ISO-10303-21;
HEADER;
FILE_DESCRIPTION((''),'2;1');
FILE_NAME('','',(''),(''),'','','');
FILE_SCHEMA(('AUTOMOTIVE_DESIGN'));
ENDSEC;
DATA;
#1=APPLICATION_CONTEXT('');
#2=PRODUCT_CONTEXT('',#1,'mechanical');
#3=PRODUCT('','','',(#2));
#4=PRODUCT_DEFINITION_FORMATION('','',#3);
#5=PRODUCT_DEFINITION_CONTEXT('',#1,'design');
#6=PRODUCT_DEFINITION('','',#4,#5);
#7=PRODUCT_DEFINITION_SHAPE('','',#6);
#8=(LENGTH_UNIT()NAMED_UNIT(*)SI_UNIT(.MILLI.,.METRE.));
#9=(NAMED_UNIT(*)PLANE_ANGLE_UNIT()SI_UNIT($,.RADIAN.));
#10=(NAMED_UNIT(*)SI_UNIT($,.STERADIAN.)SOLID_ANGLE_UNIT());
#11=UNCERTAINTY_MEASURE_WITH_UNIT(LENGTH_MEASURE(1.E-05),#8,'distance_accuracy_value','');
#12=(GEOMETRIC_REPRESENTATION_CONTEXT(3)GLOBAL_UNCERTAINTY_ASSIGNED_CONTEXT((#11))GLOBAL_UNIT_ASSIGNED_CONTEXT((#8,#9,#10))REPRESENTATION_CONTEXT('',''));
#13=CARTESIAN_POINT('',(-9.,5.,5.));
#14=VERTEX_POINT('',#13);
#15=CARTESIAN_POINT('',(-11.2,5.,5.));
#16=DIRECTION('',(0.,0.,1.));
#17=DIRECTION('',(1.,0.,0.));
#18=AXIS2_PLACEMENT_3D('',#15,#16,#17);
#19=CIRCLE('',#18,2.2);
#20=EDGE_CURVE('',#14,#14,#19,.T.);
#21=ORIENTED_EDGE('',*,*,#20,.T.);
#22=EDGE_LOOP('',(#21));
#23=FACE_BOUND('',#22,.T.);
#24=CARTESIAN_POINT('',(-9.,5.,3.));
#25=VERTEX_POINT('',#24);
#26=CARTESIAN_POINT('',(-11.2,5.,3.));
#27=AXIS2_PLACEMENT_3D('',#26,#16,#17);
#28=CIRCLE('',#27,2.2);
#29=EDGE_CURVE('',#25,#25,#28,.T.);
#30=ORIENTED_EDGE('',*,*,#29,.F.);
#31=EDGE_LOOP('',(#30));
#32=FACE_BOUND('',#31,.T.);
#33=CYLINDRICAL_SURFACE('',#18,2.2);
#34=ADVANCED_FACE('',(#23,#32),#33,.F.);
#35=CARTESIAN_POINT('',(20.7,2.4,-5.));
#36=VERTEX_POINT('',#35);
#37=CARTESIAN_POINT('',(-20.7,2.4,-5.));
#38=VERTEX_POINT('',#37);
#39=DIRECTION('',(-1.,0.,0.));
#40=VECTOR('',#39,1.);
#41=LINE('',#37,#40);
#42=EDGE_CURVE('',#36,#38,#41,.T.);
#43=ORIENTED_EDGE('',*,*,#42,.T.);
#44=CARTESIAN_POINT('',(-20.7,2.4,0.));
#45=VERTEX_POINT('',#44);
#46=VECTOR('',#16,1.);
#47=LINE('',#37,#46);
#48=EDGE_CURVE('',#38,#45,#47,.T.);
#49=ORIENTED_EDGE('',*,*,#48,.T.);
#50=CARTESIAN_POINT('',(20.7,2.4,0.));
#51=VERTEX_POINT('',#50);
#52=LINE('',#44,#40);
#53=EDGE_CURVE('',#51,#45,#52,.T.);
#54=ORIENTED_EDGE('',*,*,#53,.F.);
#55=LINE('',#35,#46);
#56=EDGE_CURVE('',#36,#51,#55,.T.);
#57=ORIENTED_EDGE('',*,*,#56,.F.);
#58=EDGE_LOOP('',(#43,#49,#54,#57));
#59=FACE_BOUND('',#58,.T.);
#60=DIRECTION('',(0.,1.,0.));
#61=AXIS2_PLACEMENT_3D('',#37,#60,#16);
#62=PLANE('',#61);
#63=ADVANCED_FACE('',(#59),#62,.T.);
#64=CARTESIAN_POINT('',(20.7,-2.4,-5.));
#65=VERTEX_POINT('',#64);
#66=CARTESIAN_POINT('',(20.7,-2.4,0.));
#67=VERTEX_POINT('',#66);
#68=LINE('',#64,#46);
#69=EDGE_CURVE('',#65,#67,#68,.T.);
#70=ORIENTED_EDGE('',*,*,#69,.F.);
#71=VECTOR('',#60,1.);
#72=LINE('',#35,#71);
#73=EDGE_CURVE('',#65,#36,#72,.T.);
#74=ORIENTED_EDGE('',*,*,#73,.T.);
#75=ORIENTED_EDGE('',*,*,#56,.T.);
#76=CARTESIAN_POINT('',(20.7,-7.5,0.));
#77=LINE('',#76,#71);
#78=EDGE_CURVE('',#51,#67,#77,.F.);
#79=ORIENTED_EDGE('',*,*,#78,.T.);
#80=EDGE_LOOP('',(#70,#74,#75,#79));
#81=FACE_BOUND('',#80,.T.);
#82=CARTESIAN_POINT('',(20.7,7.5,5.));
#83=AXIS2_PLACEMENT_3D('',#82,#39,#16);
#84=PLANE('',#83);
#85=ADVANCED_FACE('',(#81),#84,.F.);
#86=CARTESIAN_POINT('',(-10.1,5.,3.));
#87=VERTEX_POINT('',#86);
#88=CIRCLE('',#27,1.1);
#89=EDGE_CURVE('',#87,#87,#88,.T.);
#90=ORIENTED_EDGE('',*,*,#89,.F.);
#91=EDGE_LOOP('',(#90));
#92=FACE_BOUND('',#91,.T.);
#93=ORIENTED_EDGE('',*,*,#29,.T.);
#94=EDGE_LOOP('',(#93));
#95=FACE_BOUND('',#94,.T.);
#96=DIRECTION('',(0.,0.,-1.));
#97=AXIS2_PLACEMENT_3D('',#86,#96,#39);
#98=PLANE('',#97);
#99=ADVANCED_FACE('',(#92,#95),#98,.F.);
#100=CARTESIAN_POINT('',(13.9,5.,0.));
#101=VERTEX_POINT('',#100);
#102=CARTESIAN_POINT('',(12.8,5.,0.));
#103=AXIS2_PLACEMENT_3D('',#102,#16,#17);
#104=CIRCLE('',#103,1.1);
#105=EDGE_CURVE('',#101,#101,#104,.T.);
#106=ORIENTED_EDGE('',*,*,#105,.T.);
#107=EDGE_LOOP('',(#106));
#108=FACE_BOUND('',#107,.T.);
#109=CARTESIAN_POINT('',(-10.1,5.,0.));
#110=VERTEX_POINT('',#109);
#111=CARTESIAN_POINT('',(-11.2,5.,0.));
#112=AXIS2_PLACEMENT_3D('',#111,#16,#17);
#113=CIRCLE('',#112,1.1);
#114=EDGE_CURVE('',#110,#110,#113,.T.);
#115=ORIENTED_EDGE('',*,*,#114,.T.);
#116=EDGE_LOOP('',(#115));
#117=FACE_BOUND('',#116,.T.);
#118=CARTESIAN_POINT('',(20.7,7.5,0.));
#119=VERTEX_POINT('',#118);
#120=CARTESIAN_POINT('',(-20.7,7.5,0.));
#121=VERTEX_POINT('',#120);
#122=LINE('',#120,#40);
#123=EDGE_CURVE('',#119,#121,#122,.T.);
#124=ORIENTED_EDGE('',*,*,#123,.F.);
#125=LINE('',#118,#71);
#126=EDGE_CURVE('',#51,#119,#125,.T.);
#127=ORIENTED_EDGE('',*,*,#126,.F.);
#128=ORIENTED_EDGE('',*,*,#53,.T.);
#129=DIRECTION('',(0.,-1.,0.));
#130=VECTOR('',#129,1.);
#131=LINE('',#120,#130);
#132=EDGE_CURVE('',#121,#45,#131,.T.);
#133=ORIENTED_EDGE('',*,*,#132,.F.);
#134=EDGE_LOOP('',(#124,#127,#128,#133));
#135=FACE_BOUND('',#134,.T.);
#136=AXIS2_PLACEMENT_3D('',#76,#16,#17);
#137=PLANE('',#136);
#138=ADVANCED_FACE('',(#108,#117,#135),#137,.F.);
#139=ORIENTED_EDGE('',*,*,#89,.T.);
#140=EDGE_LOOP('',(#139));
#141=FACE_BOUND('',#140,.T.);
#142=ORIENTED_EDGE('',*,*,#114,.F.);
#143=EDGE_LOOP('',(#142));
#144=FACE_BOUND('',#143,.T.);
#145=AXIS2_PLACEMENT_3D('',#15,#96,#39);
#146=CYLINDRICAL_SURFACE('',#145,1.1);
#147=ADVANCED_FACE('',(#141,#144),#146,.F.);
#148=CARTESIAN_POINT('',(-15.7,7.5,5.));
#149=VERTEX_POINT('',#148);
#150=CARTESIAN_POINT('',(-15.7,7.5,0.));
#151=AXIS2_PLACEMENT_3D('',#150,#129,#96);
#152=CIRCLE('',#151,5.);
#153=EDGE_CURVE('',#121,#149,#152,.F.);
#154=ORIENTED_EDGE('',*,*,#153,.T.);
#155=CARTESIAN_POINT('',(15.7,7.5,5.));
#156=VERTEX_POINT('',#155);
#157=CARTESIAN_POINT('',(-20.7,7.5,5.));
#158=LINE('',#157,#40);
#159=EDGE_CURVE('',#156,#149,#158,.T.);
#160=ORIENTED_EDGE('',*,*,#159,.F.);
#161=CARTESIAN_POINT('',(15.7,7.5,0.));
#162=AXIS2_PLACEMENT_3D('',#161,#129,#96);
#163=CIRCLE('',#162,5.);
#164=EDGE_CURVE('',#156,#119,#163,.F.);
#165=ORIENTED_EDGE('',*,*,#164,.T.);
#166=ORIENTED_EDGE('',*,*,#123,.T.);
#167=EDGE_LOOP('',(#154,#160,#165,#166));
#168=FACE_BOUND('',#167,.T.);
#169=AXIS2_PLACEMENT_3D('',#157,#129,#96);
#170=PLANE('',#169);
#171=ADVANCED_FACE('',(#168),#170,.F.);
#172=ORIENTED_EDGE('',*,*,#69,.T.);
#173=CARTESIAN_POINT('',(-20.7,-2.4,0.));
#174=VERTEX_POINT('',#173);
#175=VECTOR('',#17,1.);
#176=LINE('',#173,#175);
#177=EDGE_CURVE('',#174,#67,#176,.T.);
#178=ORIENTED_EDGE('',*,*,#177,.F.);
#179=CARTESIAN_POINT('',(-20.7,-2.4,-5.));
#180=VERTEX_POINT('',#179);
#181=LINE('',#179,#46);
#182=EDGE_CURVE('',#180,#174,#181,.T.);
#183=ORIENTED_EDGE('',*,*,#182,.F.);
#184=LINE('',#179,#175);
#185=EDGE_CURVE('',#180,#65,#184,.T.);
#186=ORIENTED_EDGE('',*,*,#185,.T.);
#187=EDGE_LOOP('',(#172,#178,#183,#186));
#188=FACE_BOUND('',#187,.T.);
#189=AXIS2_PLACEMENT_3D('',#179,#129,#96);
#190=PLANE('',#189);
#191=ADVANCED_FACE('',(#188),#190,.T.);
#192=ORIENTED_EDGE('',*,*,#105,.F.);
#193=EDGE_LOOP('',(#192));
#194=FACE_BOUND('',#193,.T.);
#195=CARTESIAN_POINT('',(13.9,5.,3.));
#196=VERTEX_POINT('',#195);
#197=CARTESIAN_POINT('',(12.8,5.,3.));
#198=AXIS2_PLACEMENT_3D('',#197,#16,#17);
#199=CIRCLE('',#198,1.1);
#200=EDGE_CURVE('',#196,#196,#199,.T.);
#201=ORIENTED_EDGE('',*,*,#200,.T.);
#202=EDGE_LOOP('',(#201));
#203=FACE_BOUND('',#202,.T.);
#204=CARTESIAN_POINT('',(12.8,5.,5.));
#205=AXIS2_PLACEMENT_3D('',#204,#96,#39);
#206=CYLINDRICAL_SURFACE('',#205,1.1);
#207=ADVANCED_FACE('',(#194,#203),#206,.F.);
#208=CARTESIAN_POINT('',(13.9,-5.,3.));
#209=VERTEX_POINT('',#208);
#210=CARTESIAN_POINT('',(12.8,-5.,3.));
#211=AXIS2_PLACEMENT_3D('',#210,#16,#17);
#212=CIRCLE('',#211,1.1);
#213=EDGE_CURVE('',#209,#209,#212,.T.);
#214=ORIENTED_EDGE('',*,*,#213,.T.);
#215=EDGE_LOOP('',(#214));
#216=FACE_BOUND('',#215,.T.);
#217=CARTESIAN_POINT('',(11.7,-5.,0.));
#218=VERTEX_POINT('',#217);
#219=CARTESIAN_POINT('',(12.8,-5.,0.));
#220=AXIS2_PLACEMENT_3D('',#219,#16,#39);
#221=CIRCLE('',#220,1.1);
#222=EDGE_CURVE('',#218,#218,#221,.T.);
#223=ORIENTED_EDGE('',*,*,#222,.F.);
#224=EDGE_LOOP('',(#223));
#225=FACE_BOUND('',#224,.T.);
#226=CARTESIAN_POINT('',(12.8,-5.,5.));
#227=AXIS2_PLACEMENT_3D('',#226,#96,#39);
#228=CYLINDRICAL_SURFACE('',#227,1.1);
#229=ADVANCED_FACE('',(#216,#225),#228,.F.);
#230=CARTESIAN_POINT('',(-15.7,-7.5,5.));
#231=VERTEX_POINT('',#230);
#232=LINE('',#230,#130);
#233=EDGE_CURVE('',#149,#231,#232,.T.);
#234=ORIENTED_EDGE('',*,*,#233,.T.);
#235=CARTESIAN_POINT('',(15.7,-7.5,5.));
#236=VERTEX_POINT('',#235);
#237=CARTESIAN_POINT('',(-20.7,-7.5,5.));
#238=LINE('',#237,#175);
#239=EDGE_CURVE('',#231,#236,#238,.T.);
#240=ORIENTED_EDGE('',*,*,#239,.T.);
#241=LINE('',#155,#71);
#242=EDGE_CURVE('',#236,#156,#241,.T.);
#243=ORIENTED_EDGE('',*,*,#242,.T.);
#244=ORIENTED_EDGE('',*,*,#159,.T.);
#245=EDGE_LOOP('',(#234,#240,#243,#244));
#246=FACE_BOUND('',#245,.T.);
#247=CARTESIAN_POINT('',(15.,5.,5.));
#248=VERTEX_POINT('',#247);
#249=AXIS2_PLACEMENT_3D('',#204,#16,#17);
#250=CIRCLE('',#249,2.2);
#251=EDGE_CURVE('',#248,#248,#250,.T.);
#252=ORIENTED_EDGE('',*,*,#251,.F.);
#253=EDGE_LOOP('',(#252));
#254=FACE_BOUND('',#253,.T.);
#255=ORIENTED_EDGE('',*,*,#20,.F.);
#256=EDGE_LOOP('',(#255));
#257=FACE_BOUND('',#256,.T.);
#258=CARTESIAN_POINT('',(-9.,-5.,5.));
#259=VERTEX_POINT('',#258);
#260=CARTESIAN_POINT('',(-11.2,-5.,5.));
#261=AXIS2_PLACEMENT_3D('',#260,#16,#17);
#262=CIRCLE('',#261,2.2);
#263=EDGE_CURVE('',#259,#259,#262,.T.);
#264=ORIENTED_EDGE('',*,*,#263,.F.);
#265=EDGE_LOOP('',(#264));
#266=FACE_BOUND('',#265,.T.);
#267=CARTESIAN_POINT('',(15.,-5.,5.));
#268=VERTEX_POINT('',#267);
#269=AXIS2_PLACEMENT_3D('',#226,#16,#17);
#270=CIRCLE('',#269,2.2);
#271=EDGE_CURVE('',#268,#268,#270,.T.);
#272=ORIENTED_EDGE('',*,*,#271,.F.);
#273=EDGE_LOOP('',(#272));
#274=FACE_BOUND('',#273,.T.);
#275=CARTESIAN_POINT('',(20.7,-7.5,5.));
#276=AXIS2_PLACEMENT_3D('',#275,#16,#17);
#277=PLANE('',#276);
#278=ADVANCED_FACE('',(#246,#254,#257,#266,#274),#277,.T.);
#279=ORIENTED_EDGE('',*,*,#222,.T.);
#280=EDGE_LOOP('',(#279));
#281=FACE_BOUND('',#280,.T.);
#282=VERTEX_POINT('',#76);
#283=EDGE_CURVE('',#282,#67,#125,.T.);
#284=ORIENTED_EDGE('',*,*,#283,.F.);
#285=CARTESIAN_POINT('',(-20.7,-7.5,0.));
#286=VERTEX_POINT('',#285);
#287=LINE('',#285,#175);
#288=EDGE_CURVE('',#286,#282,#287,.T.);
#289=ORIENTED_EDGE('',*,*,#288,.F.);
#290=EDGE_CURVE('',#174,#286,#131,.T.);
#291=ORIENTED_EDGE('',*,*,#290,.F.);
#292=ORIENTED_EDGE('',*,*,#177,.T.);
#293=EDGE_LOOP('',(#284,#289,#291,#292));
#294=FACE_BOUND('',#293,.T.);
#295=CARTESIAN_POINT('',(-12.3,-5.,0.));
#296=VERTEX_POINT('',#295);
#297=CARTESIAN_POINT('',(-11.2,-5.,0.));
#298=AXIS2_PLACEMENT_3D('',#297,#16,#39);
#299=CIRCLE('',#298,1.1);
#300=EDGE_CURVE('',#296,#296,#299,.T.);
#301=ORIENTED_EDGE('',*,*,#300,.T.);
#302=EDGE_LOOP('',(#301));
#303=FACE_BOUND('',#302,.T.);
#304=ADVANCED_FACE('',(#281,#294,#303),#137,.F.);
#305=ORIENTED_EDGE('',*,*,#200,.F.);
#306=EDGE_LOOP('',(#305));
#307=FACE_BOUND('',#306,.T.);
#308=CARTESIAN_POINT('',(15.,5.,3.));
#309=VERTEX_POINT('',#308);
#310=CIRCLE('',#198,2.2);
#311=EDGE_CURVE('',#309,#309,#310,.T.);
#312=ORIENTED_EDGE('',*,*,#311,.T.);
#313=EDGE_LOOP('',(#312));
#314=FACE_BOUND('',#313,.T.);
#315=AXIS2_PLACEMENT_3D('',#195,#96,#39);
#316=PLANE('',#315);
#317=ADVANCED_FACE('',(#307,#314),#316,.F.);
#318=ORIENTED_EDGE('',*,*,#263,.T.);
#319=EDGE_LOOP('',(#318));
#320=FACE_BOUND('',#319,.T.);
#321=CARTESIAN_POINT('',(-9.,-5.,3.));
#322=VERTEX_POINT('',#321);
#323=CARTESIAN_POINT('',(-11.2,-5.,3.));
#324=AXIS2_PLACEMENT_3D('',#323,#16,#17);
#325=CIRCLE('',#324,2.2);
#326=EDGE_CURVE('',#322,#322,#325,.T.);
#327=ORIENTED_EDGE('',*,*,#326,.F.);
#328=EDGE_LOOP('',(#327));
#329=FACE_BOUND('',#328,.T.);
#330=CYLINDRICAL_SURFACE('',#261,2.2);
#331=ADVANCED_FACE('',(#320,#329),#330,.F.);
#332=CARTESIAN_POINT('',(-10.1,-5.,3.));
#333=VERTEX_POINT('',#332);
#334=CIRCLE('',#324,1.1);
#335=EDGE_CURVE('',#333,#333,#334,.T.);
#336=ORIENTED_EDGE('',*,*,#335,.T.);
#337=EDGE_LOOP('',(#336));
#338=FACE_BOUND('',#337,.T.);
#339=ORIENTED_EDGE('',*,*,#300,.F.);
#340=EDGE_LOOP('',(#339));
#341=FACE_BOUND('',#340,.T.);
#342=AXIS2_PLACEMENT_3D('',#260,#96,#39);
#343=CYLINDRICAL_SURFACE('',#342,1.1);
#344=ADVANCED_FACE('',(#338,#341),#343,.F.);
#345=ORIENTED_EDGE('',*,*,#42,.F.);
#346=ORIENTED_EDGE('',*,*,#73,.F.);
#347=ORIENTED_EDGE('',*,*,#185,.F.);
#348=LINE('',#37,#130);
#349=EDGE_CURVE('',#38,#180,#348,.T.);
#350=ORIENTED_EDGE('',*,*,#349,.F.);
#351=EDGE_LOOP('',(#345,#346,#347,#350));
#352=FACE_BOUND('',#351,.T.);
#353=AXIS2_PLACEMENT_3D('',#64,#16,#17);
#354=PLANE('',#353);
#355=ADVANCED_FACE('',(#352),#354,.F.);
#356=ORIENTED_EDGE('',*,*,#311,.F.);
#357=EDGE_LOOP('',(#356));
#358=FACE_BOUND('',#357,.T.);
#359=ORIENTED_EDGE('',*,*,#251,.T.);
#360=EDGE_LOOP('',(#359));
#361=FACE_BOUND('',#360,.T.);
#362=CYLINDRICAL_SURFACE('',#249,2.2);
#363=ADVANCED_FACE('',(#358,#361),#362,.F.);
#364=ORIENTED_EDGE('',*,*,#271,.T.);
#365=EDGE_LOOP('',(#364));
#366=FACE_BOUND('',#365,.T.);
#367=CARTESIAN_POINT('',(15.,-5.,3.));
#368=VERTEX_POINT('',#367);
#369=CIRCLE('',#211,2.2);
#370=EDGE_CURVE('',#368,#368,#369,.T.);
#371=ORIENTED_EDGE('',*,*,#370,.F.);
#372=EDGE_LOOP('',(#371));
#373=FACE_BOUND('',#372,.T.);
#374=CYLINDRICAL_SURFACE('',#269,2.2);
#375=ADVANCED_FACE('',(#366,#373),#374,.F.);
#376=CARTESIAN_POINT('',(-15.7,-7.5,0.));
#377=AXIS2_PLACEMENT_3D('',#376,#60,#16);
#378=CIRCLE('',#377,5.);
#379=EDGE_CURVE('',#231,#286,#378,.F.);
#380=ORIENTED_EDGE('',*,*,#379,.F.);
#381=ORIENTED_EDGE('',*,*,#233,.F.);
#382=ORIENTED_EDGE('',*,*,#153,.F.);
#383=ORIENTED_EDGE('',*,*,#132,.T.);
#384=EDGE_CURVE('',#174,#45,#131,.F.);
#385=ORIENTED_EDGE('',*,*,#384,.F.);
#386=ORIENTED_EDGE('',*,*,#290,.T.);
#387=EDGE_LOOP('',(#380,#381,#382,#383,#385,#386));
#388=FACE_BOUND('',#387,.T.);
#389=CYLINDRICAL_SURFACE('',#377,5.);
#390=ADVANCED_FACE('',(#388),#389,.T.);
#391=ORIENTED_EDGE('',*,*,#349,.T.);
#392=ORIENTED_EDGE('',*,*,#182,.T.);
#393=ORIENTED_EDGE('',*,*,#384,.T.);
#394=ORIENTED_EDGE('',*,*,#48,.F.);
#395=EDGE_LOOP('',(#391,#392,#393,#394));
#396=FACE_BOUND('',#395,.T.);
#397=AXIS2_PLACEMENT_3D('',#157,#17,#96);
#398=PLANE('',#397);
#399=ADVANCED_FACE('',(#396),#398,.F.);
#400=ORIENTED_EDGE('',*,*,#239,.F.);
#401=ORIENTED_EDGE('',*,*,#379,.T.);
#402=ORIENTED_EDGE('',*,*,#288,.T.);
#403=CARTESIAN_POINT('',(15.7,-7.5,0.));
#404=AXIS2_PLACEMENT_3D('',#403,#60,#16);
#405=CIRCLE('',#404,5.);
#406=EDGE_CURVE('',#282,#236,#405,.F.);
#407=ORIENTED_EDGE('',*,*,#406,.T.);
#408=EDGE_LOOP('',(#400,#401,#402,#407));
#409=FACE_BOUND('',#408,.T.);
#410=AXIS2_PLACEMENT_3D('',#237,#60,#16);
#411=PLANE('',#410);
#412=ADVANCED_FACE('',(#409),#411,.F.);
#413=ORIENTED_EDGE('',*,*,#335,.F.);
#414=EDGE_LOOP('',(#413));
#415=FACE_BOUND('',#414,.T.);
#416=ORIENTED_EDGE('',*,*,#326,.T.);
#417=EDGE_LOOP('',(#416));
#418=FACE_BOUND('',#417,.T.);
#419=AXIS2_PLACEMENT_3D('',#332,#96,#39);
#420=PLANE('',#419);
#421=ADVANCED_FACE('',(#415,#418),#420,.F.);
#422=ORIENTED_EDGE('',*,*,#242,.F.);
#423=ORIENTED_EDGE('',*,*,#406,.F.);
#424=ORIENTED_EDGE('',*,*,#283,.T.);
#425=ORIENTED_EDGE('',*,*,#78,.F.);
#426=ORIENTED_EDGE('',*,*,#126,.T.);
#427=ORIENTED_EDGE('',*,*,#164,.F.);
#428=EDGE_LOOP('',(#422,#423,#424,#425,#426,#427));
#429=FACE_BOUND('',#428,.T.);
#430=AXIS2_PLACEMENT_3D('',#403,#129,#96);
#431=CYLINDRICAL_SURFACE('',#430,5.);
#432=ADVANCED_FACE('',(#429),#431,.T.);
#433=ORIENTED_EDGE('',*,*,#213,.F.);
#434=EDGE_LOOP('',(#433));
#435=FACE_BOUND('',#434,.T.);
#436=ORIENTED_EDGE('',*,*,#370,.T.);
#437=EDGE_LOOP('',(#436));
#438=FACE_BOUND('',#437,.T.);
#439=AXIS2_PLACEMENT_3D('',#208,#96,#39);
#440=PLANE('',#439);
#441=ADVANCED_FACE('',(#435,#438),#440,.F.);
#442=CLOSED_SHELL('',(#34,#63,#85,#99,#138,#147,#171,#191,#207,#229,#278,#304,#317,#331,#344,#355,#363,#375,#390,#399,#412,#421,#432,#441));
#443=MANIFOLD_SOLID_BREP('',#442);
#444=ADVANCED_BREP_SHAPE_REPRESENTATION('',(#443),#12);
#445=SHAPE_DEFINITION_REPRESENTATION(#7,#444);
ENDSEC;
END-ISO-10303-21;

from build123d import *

# Parameters (mm, degrees)
SKETCH1_W                      = 41.4
SKETCH1_H                      = 15
SKETCH1_R                      = 1.1
BOSS_EXTRUDE1_DEPTH            = 5
SKETCH2_W                      = 41.4
SKETCH2_H                      = 4.8
BOSS_EXTRUDE2_DEPTH            = 5
CBORE_FOR_M2_SHCS1_D           = 2.2
CBORE_FOR_M2_SHCS1_CBORE_D     = 4.4
CBORE_FOR_M2_SHCS1_CBORE_DEPTH = 2
FILLET1_R                      = 5


with BuildPart() as part:
    # Sketch1 → Boss-Extrude1 (new body)
    with BuildSketch(Plane.XY):
        Rectangle(SKETCH1_W, SKETCH1_H)
        with Locations((-11.2, 5)):
            Circle(SKETCH1_R, mode=Mode.SUBTRACT)
        with Locations((12.8, 5)):
            Circle(SKETCH1_R, mode=Mode.SUBTRACT)
        with Locations(Location((12.8, -5, 0), (0, 0, 180))):
            Circle(SKETCH1_R, mode=Mode.SUBTRACT)
        with Locations(Location((-11.2, -5, 0), (0, 0, 180))):
            Circle(SKETCH1_R, mode=Mode.SUBTRACT)
    extrude(amount=BOSS_EXTRUDE1_DEPTH)

    # Sketch2 → Boss-Extrude2 (add)
    with BuildSketch(Plane.XY):
        Rectangle(SKETCH2_W, SKETCH2_H)
    extrude(amount=-BOSS_EXTRUDE2_DEPTH)

    # CBORE for M2 SHCS1 (through all)
    with Locations(Plane.XY.offset(5)):
        with Locations((-11.2, 5), (12.8, 5), (12.8, -5), (-11.2, -5)):
            CounterBoreHole(CBORE_FOR_M2_SHCS1_D / 2, CBORE_FOR_M2_SHCS1_CBORE_D / 2, CBORE_FOR_M2_SHCS1_CBORE_DEPTH)

    # Fillet1
    fillet1_edges = [part.edges().sort_by_distance(p)[0] for p in [
        (-20.7, 0, 5),
        (20.7, 0, 5),
    ]]
    fillet(fillet1_edges, radius=FILLET1_R - 0.0001)  # a hair under: the kernel refuses the full size


solid = part.part
